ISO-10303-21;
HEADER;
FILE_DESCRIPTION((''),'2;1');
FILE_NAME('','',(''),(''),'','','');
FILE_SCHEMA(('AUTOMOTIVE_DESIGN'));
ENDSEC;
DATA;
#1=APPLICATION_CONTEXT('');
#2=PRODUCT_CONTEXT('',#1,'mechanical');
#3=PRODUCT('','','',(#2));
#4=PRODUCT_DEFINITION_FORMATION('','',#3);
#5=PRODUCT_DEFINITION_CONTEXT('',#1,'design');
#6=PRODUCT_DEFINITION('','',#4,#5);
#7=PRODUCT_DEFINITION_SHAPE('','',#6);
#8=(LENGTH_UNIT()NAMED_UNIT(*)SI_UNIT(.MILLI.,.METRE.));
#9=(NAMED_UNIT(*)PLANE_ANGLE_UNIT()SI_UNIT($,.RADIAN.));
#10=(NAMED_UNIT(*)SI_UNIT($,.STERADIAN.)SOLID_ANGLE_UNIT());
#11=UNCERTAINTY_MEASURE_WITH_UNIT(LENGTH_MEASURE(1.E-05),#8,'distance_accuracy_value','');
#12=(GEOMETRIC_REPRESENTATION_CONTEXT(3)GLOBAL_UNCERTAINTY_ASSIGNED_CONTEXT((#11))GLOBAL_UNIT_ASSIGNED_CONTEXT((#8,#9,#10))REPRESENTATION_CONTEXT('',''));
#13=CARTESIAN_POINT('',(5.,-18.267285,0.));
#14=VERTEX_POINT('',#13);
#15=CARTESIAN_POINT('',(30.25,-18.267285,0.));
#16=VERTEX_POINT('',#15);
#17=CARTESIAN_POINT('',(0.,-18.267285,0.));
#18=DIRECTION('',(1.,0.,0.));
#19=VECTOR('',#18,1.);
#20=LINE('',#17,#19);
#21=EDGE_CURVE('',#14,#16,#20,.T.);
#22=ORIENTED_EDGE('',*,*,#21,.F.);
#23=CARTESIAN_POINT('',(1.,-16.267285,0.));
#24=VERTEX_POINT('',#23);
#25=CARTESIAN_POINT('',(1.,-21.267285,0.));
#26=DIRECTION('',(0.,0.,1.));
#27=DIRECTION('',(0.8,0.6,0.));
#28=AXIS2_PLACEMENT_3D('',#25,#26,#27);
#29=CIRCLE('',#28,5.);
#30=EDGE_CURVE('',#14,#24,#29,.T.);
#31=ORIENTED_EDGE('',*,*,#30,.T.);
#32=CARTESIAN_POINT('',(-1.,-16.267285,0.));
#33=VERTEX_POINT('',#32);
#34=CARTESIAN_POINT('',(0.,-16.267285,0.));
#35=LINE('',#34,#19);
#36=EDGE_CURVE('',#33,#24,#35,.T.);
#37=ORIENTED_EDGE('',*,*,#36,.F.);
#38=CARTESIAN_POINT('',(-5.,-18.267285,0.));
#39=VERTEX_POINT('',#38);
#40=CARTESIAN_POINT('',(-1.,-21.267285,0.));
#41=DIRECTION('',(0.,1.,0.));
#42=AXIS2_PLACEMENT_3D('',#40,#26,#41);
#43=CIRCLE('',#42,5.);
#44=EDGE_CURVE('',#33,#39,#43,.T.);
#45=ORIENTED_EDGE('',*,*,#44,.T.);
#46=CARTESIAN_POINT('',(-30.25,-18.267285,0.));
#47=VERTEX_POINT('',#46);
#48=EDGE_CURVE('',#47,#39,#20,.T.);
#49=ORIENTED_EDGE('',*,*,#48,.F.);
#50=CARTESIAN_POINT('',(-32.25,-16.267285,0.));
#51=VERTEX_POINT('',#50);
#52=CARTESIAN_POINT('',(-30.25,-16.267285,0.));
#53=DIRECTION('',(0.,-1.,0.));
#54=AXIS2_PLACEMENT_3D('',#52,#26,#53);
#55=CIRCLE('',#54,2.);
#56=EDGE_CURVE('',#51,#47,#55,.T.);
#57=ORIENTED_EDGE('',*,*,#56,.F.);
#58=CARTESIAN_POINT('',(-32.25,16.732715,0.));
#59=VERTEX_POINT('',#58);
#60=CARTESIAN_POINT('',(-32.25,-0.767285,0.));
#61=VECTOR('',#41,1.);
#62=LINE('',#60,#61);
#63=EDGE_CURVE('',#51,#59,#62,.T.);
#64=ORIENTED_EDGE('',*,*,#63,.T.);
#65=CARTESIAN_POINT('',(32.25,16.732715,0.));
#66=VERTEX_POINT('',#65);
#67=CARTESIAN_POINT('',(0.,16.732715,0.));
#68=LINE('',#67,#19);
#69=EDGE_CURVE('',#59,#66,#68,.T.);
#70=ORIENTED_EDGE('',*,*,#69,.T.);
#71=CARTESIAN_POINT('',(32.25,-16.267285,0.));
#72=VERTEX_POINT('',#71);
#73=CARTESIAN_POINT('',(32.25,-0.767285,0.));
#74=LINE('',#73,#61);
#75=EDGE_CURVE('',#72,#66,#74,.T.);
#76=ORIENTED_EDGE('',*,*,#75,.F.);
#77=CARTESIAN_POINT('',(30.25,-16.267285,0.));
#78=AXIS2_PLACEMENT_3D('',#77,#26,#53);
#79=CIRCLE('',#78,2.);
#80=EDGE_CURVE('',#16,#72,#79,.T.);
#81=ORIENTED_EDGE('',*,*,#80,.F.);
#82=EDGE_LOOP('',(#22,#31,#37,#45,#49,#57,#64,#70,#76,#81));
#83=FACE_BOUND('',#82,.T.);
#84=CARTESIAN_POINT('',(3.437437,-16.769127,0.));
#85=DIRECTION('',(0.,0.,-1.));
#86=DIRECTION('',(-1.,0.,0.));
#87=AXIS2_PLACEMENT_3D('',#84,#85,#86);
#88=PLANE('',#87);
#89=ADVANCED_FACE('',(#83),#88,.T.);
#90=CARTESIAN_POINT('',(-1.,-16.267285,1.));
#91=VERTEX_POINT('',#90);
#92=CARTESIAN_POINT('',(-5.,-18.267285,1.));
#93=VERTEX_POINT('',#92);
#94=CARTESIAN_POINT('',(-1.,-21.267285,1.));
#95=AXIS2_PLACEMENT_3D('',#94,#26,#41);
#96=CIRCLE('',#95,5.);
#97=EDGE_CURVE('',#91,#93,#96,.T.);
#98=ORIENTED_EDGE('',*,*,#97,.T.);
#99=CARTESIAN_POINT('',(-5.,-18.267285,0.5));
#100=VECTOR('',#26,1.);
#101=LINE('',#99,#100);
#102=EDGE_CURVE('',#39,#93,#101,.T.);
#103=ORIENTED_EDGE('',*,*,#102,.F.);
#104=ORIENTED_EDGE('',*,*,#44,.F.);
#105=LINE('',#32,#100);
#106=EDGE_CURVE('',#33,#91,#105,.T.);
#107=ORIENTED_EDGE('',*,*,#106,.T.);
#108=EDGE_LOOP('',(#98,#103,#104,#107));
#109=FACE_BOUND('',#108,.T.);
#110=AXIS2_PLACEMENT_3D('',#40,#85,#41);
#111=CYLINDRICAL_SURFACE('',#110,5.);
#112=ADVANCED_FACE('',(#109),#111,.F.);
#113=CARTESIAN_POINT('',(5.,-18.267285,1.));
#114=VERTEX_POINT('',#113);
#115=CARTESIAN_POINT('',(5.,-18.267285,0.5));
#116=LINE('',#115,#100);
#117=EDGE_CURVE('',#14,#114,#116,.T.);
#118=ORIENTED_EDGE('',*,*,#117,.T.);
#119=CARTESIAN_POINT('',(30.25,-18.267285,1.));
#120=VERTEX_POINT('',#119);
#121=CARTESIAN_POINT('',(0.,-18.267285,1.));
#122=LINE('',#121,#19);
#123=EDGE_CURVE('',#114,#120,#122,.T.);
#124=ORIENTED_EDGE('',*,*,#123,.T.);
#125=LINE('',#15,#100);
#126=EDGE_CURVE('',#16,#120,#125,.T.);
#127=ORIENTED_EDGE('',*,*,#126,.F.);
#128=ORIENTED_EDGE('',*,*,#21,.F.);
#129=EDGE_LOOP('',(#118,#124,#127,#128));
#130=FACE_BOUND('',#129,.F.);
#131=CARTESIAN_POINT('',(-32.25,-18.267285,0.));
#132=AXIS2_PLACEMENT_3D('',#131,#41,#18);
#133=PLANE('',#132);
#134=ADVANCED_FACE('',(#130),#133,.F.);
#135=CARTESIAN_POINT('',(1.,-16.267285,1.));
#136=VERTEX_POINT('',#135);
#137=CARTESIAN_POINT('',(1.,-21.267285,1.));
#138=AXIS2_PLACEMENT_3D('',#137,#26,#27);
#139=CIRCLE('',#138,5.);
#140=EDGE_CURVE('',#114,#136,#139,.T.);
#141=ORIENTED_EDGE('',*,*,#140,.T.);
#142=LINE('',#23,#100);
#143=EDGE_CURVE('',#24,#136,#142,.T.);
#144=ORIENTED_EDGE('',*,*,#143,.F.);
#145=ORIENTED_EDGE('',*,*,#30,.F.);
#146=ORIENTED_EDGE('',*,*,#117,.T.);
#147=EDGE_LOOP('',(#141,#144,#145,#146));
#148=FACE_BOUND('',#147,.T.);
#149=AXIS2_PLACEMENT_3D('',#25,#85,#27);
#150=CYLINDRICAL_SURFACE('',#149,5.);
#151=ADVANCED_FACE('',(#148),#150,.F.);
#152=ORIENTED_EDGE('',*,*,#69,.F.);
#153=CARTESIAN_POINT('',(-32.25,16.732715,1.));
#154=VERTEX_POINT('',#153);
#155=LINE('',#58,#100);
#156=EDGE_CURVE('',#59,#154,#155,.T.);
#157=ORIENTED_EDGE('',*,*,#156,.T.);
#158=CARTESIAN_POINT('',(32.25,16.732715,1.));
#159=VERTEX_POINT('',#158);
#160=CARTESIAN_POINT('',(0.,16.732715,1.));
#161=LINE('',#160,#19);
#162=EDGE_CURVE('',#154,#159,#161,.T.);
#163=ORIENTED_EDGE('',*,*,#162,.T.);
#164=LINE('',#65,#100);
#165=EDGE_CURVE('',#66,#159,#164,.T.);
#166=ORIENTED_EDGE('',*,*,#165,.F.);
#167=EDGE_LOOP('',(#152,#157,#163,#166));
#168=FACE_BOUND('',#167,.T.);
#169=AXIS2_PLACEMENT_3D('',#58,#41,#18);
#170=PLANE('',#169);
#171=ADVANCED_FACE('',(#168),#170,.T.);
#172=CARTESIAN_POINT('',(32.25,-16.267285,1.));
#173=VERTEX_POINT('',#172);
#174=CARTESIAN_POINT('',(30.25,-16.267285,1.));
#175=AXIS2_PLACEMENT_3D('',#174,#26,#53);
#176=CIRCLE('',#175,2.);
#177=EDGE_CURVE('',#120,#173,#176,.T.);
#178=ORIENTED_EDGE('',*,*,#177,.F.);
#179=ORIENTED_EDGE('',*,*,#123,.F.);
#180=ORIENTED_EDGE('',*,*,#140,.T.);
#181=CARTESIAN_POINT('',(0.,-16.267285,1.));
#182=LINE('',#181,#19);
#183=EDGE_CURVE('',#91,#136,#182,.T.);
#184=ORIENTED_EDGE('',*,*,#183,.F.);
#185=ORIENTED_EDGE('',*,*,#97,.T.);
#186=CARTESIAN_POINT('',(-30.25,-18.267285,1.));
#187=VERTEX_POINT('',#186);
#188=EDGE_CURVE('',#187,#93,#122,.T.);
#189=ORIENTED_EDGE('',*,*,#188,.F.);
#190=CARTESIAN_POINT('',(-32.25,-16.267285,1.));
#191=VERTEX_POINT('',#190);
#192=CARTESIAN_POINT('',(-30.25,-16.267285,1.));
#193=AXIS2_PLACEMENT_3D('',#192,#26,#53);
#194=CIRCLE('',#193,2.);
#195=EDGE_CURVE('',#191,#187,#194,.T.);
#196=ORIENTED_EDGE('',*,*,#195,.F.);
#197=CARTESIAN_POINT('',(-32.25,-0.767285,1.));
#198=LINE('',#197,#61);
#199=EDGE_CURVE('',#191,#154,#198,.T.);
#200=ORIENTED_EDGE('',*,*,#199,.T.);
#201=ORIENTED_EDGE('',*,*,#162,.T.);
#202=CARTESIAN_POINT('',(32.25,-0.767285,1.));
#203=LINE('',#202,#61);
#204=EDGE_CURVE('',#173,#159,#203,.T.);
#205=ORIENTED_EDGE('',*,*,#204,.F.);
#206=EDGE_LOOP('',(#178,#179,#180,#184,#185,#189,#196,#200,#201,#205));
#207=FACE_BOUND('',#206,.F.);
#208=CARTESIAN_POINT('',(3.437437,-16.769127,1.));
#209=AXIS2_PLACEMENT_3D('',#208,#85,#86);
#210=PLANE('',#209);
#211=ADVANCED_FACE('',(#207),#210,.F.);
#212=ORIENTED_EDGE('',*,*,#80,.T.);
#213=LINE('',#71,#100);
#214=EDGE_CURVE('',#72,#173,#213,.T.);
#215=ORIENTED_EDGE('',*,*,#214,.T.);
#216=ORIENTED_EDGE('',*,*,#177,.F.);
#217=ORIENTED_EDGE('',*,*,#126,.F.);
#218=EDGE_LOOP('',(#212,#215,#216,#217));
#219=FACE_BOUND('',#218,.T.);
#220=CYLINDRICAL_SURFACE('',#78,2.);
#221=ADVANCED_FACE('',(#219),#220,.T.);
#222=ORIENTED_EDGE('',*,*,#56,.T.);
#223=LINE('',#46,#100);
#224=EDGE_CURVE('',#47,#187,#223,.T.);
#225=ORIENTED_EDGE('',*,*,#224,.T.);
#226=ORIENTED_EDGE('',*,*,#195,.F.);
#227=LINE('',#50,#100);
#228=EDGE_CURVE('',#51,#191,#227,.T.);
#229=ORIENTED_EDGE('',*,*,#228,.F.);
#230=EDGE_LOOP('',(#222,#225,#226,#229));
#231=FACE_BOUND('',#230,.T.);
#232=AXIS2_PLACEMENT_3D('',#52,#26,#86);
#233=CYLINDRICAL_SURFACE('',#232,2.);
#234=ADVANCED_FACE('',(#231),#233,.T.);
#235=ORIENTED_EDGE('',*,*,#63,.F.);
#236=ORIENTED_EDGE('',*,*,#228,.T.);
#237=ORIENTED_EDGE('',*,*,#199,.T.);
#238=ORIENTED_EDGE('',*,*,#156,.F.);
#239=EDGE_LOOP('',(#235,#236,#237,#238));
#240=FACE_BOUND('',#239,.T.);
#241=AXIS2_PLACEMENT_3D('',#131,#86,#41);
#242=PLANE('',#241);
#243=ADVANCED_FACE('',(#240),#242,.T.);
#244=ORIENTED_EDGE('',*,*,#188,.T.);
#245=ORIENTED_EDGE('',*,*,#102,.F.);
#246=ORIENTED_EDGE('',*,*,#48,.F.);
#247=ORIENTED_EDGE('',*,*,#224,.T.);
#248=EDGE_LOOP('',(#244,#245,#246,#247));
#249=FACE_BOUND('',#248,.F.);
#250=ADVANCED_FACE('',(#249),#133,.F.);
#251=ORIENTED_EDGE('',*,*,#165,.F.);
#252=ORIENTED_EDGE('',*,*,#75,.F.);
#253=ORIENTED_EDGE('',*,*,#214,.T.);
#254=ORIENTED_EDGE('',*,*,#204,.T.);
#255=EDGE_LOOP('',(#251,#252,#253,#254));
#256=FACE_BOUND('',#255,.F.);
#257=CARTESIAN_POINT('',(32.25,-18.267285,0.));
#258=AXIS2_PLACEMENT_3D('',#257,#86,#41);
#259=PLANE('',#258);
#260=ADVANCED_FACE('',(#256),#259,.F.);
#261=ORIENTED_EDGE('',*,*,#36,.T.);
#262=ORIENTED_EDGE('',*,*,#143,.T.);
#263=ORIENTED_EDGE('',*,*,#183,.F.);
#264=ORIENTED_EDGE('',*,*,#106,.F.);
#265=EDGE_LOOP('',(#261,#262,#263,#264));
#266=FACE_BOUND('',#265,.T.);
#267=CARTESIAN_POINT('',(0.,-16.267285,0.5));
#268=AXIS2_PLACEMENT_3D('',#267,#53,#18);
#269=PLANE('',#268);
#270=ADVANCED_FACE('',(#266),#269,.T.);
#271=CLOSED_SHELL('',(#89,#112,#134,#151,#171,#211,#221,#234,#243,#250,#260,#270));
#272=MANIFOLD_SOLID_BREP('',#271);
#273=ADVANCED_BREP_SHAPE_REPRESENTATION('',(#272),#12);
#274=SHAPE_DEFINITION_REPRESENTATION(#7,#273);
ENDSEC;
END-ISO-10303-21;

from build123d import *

# Parameters (mm, degrees)
F0_W        = 64.5
F0_H        = 35
F1_DEPTH    = 1
F2_R        = 2
F3_W        = 10
F3_H        = 1
F4_DEPTH    = 2
F5_T1_DEPTH = 1


# Not quite as in the source:
# - a fillet or chamfer that OpenCascade refuses, or shapes differently, is made with other operations: its cross-section is extruded or revolved along the edge and cut away or added


with BuildPart() as f1:
    # F0 (on Top) → F1 (new body)
    with BuildSketch(Plane.XY):
        with Locations((0, -0.7672849298)):
            Rectangle(F0_W, F0_H)
    extrude(amount=F1_DEPTH)

    # F2
    f2_edges = [f1.edges().sort_by_distance(p)[0] for p in [
        (-32.25, -18.267285, 0.5),
        (32.25, -18.267285, 0.5),
    ]]
    fillet(f2_edges, radius=F2_R)

    # F3 (on face) → F4 (cut)
    with BuildSketch(Plane.XZ.offset(18.2672849298)):
        with Locations((0, 0.5)):
            Rectangle(F3_W, F3_H)
    extrude(amount=-F4_DEPTH, mode=Mode.SUBTRACT)

    # F5: fillet of radius 5 on 2 edges, made by hand

    # F5_s2 → F5_t1 (join)
    with BuildSketch(Plane.XY):
        with BuildLine():
            ThreePointArc((5, -18.2672849298), (3.2360679775, -16.7951489748), (1, -16.2672849298))
            Line((1, -16.2672849298), (5, -16.2672849298))
            Line((5, -16.2672849298), (5, -18.2672849298))
        make_face()
        with BuildLine():
            ThreePointArc((-1, -16.2672849298), (-3.2360679775, -16.7951489748), (-5, -18.2672849298))
            Line((-5, -18.2672849298), (-5, -16.2672849298))
            Line((-5, -16.2672849298), (-1, -16.2672849298))
        make_face()
    extrude(amount=F5_T1_DEPTH)


solid = f1.part
